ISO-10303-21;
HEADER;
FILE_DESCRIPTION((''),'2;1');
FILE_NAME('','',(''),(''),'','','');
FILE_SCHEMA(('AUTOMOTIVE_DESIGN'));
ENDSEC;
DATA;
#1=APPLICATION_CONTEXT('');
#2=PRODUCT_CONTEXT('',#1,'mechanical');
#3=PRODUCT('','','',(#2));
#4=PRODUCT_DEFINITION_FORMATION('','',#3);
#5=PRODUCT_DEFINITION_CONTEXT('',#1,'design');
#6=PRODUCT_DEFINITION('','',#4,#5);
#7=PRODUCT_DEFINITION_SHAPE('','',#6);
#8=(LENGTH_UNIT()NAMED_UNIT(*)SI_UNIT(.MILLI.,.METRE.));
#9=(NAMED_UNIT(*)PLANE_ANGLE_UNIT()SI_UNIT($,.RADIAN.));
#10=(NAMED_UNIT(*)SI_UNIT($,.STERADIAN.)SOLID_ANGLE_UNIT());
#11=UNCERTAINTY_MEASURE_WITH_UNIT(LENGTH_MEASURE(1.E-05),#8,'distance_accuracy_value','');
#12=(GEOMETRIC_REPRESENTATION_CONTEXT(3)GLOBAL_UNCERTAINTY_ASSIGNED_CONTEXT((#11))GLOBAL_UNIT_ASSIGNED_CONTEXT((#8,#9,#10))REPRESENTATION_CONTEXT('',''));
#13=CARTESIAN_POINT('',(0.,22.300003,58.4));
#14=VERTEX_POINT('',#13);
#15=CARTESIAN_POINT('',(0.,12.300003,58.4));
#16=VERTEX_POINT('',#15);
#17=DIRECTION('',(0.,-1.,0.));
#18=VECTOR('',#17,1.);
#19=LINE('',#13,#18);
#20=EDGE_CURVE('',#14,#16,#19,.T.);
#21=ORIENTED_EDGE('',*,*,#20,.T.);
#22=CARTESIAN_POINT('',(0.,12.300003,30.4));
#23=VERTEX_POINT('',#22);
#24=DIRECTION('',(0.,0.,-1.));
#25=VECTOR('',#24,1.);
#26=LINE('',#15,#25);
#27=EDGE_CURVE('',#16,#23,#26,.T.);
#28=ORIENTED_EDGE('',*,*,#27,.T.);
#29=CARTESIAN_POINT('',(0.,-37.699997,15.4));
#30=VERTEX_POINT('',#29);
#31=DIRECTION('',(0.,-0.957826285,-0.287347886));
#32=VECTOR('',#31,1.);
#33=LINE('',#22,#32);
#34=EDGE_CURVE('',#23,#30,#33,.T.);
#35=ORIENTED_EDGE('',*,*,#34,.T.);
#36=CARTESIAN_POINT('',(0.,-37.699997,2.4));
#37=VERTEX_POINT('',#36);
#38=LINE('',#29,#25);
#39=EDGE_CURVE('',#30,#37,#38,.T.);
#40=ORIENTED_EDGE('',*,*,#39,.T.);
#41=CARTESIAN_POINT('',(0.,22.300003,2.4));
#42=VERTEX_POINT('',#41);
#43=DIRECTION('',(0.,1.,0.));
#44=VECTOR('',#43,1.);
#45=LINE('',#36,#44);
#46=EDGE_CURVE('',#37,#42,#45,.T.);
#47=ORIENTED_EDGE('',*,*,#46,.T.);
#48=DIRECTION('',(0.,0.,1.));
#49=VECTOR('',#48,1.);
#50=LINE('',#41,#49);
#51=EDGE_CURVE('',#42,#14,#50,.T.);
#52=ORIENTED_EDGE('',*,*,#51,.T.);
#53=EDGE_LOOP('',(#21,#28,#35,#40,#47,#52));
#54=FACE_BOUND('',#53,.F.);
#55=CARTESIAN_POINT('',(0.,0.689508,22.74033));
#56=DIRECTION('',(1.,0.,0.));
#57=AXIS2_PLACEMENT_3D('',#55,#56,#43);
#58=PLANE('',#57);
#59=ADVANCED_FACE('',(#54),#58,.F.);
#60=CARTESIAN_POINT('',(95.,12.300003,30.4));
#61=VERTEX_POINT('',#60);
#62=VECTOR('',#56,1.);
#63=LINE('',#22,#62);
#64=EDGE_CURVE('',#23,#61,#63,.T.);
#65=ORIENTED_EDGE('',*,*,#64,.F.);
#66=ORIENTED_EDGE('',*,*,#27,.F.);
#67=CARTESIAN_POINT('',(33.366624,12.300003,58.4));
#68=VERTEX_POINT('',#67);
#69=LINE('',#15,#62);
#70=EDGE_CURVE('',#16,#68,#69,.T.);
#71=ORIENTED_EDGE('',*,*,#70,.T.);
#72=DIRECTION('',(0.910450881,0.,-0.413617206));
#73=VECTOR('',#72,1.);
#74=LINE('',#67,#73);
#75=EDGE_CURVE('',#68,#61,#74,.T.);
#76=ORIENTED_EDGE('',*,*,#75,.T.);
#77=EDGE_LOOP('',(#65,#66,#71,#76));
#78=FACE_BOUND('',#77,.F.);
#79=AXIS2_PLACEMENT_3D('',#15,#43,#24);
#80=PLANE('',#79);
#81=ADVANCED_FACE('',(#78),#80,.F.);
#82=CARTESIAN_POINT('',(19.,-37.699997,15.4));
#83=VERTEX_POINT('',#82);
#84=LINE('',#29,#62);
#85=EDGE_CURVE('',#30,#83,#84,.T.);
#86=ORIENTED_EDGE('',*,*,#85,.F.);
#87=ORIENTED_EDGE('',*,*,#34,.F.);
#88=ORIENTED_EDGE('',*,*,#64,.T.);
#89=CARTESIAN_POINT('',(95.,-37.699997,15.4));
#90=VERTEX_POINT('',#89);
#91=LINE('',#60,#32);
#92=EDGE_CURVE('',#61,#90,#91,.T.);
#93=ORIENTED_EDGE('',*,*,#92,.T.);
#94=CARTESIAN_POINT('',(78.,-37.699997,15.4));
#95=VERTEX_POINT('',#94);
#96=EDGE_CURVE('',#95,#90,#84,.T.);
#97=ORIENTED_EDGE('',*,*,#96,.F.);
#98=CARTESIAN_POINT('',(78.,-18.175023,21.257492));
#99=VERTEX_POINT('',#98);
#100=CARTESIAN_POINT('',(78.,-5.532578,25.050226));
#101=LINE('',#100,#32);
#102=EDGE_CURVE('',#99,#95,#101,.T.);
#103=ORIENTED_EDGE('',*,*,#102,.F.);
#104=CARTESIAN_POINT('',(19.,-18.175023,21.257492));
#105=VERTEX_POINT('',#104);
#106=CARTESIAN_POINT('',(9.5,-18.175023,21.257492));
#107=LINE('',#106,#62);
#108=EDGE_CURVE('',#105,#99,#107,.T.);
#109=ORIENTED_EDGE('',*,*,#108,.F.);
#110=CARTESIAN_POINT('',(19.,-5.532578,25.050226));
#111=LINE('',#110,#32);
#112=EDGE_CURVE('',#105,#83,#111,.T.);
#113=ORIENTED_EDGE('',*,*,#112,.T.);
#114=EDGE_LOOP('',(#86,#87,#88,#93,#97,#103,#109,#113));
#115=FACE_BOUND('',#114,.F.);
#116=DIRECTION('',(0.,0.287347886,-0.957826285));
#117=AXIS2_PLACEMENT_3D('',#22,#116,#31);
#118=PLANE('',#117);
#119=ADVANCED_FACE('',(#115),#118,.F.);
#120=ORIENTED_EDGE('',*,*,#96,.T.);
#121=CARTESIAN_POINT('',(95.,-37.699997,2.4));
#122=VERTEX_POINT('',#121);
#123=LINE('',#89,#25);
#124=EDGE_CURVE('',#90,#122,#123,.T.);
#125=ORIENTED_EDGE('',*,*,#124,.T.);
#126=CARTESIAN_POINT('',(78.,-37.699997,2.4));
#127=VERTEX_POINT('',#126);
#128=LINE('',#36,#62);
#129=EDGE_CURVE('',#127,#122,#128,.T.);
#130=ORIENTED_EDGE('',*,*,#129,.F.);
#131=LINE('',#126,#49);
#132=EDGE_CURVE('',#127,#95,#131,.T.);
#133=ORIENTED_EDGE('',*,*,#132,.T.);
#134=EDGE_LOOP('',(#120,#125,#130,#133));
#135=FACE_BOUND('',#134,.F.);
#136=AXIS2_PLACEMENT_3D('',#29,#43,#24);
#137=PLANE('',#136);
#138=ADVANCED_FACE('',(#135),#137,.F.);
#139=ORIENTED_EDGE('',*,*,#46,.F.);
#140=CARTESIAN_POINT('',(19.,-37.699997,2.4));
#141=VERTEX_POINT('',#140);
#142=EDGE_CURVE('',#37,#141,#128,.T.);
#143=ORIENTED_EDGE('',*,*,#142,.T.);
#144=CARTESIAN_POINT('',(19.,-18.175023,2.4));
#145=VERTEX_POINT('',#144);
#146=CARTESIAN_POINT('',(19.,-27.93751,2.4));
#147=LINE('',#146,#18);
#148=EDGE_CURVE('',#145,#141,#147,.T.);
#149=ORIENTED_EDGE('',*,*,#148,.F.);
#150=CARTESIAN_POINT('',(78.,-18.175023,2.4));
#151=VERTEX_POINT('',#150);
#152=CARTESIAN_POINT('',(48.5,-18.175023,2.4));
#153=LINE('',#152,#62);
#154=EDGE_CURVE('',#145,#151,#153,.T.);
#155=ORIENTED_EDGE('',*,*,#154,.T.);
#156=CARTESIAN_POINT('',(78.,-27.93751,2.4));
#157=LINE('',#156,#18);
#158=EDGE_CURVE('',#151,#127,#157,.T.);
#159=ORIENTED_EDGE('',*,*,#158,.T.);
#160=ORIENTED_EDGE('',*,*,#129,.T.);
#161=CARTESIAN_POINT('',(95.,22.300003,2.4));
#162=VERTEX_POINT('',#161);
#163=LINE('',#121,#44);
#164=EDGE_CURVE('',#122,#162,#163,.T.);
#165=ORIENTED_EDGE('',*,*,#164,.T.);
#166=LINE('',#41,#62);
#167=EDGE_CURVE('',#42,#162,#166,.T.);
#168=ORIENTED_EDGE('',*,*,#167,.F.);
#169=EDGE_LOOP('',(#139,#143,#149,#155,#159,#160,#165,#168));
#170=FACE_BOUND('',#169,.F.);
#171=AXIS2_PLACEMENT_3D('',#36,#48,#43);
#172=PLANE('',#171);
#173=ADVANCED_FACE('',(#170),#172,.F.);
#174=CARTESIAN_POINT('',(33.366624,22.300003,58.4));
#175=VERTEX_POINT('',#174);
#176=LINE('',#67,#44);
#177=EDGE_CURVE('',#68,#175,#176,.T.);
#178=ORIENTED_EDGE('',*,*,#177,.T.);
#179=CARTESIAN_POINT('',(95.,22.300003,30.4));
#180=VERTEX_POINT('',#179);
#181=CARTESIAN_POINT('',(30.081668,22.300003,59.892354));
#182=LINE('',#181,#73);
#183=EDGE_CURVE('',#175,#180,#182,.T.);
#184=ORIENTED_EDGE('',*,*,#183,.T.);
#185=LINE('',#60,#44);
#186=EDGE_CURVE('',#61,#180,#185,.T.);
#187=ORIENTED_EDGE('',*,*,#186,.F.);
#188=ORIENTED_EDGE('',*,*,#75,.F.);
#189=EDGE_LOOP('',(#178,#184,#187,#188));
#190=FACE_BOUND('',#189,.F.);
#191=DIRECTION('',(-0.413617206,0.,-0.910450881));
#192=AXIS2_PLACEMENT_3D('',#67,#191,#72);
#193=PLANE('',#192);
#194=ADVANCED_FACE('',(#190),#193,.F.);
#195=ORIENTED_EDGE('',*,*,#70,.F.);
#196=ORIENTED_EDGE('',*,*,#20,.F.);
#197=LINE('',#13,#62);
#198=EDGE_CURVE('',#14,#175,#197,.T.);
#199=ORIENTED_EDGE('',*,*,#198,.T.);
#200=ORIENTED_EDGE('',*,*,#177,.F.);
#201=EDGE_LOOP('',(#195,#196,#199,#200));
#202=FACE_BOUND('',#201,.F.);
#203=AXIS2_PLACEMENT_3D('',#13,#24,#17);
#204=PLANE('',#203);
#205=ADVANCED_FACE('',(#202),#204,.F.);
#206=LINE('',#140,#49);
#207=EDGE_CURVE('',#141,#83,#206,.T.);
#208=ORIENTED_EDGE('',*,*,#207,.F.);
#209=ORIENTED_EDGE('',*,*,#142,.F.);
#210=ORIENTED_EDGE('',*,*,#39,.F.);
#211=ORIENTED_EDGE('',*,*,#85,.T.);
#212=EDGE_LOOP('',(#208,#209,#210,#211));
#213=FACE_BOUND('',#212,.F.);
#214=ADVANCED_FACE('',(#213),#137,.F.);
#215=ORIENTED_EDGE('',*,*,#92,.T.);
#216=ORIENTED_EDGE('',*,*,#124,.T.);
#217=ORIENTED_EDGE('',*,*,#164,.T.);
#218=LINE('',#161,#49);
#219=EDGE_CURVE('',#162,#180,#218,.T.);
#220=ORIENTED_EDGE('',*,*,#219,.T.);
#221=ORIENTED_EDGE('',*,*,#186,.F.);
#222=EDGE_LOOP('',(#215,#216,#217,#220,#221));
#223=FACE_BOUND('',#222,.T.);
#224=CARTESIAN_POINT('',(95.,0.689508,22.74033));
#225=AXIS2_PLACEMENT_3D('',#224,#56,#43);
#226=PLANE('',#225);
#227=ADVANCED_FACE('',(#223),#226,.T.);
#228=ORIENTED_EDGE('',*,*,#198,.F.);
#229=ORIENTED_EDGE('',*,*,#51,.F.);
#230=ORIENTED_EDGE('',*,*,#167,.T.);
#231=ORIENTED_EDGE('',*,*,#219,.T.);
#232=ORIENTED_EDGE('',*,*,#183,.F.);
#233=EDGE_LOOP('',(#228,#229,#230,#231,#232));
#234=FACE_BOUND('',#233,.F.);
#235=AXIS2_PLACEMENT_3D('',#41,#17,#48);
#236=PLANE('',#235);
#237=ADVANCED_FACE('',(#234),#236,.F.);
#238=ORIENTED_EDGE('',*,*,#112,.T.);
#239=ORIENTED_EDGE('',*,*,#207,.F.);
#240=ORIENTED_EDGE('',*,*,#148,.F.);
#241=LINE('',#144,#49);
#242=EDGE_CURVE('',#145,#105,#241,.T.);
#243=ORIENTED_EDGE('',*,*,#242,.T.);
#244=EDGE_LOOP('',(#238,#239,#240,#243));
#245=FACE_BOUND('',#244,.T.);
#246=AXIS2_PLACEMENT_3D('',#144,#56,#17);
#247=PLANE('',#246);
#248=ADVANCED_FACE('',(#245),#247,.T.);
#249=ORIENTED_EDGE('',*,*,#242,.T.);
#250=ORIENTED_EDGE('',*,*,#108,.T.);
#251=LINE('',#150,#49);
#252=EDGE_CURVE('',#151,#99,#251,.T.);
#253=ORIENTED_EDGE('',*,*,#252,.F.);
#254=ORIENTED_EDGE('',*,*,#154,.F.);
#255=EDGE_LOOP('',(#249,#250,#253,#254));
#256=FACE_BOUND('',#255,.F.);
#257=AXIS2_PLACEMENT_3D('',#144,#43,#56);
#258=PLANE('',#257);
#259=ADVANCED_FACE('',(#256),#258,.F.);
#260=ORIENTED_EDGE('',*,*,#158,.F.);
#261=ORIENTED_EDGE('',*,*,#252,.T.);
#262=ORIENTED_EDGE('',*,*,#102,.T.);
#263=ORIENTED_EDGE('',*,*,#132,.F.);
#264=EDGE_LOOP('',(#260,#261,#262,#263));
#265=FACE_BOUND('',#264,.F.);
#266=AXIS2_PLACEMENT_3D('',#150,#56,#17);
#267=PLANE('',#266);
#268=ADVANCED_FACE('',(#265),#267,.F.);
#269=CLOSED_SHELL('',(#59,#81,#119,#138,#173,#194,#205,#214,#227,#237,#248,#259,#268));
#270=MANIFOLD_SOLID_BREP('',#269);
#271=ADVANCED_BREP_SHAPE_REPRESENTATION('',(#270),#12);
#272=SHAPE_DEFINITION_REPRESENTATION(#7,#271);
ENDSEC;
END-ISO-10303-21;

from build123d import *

# Parameters (mm, degrees)
F1_DEPTH = 95
F4_DEPTH = 25
F3_W     = 59
F3_H     = 19.5249739359
F5_DEPTH = 25


# Not quite as in the source:
# - a feature names something its author has since deleted; it is built from what else it names


with BuildPart() as f1:
    # F0 (on Right) → F1 (new body)
    with BuildSketch(Plane.YZ):
        Polygon((-37.6999974251, 2.400000114), (22.3000025749, 2.400000114), (22.3000025749, 58.400000114), (12.3000025749, 58.400000114), (12.3000025749, 30.400000114), (-37.6999974251, 15.400000114), align=None)
    extrude(amount=F1_DEPTH)

    # F2 (on face) → F4 (cut)
    with BuildSketch(Plane.XZ.offset(-12.3000025749)):
        Polygon((95, 58.400000114), (33.3666242659, 58.400000114), (95, 30.400000114), align=None)
    extrude(amount=-F4_DEPTH, mode=Mode.SUBTRACT)

    # F3 (on face) → F5 (cut)
    with BuildSketch(Plane(origin=(0, 0, 2.400000114), x_dir=(1, 0, 0), z_dir=(0, 0, -1))):
        with Locations((48.5, 27.9375104571)):
            Rectangle(F3_W, F3_H)
    extrude(amount=-F5_DEPTH, mode=Mode.SUBTRACT)


solid = f1.part
